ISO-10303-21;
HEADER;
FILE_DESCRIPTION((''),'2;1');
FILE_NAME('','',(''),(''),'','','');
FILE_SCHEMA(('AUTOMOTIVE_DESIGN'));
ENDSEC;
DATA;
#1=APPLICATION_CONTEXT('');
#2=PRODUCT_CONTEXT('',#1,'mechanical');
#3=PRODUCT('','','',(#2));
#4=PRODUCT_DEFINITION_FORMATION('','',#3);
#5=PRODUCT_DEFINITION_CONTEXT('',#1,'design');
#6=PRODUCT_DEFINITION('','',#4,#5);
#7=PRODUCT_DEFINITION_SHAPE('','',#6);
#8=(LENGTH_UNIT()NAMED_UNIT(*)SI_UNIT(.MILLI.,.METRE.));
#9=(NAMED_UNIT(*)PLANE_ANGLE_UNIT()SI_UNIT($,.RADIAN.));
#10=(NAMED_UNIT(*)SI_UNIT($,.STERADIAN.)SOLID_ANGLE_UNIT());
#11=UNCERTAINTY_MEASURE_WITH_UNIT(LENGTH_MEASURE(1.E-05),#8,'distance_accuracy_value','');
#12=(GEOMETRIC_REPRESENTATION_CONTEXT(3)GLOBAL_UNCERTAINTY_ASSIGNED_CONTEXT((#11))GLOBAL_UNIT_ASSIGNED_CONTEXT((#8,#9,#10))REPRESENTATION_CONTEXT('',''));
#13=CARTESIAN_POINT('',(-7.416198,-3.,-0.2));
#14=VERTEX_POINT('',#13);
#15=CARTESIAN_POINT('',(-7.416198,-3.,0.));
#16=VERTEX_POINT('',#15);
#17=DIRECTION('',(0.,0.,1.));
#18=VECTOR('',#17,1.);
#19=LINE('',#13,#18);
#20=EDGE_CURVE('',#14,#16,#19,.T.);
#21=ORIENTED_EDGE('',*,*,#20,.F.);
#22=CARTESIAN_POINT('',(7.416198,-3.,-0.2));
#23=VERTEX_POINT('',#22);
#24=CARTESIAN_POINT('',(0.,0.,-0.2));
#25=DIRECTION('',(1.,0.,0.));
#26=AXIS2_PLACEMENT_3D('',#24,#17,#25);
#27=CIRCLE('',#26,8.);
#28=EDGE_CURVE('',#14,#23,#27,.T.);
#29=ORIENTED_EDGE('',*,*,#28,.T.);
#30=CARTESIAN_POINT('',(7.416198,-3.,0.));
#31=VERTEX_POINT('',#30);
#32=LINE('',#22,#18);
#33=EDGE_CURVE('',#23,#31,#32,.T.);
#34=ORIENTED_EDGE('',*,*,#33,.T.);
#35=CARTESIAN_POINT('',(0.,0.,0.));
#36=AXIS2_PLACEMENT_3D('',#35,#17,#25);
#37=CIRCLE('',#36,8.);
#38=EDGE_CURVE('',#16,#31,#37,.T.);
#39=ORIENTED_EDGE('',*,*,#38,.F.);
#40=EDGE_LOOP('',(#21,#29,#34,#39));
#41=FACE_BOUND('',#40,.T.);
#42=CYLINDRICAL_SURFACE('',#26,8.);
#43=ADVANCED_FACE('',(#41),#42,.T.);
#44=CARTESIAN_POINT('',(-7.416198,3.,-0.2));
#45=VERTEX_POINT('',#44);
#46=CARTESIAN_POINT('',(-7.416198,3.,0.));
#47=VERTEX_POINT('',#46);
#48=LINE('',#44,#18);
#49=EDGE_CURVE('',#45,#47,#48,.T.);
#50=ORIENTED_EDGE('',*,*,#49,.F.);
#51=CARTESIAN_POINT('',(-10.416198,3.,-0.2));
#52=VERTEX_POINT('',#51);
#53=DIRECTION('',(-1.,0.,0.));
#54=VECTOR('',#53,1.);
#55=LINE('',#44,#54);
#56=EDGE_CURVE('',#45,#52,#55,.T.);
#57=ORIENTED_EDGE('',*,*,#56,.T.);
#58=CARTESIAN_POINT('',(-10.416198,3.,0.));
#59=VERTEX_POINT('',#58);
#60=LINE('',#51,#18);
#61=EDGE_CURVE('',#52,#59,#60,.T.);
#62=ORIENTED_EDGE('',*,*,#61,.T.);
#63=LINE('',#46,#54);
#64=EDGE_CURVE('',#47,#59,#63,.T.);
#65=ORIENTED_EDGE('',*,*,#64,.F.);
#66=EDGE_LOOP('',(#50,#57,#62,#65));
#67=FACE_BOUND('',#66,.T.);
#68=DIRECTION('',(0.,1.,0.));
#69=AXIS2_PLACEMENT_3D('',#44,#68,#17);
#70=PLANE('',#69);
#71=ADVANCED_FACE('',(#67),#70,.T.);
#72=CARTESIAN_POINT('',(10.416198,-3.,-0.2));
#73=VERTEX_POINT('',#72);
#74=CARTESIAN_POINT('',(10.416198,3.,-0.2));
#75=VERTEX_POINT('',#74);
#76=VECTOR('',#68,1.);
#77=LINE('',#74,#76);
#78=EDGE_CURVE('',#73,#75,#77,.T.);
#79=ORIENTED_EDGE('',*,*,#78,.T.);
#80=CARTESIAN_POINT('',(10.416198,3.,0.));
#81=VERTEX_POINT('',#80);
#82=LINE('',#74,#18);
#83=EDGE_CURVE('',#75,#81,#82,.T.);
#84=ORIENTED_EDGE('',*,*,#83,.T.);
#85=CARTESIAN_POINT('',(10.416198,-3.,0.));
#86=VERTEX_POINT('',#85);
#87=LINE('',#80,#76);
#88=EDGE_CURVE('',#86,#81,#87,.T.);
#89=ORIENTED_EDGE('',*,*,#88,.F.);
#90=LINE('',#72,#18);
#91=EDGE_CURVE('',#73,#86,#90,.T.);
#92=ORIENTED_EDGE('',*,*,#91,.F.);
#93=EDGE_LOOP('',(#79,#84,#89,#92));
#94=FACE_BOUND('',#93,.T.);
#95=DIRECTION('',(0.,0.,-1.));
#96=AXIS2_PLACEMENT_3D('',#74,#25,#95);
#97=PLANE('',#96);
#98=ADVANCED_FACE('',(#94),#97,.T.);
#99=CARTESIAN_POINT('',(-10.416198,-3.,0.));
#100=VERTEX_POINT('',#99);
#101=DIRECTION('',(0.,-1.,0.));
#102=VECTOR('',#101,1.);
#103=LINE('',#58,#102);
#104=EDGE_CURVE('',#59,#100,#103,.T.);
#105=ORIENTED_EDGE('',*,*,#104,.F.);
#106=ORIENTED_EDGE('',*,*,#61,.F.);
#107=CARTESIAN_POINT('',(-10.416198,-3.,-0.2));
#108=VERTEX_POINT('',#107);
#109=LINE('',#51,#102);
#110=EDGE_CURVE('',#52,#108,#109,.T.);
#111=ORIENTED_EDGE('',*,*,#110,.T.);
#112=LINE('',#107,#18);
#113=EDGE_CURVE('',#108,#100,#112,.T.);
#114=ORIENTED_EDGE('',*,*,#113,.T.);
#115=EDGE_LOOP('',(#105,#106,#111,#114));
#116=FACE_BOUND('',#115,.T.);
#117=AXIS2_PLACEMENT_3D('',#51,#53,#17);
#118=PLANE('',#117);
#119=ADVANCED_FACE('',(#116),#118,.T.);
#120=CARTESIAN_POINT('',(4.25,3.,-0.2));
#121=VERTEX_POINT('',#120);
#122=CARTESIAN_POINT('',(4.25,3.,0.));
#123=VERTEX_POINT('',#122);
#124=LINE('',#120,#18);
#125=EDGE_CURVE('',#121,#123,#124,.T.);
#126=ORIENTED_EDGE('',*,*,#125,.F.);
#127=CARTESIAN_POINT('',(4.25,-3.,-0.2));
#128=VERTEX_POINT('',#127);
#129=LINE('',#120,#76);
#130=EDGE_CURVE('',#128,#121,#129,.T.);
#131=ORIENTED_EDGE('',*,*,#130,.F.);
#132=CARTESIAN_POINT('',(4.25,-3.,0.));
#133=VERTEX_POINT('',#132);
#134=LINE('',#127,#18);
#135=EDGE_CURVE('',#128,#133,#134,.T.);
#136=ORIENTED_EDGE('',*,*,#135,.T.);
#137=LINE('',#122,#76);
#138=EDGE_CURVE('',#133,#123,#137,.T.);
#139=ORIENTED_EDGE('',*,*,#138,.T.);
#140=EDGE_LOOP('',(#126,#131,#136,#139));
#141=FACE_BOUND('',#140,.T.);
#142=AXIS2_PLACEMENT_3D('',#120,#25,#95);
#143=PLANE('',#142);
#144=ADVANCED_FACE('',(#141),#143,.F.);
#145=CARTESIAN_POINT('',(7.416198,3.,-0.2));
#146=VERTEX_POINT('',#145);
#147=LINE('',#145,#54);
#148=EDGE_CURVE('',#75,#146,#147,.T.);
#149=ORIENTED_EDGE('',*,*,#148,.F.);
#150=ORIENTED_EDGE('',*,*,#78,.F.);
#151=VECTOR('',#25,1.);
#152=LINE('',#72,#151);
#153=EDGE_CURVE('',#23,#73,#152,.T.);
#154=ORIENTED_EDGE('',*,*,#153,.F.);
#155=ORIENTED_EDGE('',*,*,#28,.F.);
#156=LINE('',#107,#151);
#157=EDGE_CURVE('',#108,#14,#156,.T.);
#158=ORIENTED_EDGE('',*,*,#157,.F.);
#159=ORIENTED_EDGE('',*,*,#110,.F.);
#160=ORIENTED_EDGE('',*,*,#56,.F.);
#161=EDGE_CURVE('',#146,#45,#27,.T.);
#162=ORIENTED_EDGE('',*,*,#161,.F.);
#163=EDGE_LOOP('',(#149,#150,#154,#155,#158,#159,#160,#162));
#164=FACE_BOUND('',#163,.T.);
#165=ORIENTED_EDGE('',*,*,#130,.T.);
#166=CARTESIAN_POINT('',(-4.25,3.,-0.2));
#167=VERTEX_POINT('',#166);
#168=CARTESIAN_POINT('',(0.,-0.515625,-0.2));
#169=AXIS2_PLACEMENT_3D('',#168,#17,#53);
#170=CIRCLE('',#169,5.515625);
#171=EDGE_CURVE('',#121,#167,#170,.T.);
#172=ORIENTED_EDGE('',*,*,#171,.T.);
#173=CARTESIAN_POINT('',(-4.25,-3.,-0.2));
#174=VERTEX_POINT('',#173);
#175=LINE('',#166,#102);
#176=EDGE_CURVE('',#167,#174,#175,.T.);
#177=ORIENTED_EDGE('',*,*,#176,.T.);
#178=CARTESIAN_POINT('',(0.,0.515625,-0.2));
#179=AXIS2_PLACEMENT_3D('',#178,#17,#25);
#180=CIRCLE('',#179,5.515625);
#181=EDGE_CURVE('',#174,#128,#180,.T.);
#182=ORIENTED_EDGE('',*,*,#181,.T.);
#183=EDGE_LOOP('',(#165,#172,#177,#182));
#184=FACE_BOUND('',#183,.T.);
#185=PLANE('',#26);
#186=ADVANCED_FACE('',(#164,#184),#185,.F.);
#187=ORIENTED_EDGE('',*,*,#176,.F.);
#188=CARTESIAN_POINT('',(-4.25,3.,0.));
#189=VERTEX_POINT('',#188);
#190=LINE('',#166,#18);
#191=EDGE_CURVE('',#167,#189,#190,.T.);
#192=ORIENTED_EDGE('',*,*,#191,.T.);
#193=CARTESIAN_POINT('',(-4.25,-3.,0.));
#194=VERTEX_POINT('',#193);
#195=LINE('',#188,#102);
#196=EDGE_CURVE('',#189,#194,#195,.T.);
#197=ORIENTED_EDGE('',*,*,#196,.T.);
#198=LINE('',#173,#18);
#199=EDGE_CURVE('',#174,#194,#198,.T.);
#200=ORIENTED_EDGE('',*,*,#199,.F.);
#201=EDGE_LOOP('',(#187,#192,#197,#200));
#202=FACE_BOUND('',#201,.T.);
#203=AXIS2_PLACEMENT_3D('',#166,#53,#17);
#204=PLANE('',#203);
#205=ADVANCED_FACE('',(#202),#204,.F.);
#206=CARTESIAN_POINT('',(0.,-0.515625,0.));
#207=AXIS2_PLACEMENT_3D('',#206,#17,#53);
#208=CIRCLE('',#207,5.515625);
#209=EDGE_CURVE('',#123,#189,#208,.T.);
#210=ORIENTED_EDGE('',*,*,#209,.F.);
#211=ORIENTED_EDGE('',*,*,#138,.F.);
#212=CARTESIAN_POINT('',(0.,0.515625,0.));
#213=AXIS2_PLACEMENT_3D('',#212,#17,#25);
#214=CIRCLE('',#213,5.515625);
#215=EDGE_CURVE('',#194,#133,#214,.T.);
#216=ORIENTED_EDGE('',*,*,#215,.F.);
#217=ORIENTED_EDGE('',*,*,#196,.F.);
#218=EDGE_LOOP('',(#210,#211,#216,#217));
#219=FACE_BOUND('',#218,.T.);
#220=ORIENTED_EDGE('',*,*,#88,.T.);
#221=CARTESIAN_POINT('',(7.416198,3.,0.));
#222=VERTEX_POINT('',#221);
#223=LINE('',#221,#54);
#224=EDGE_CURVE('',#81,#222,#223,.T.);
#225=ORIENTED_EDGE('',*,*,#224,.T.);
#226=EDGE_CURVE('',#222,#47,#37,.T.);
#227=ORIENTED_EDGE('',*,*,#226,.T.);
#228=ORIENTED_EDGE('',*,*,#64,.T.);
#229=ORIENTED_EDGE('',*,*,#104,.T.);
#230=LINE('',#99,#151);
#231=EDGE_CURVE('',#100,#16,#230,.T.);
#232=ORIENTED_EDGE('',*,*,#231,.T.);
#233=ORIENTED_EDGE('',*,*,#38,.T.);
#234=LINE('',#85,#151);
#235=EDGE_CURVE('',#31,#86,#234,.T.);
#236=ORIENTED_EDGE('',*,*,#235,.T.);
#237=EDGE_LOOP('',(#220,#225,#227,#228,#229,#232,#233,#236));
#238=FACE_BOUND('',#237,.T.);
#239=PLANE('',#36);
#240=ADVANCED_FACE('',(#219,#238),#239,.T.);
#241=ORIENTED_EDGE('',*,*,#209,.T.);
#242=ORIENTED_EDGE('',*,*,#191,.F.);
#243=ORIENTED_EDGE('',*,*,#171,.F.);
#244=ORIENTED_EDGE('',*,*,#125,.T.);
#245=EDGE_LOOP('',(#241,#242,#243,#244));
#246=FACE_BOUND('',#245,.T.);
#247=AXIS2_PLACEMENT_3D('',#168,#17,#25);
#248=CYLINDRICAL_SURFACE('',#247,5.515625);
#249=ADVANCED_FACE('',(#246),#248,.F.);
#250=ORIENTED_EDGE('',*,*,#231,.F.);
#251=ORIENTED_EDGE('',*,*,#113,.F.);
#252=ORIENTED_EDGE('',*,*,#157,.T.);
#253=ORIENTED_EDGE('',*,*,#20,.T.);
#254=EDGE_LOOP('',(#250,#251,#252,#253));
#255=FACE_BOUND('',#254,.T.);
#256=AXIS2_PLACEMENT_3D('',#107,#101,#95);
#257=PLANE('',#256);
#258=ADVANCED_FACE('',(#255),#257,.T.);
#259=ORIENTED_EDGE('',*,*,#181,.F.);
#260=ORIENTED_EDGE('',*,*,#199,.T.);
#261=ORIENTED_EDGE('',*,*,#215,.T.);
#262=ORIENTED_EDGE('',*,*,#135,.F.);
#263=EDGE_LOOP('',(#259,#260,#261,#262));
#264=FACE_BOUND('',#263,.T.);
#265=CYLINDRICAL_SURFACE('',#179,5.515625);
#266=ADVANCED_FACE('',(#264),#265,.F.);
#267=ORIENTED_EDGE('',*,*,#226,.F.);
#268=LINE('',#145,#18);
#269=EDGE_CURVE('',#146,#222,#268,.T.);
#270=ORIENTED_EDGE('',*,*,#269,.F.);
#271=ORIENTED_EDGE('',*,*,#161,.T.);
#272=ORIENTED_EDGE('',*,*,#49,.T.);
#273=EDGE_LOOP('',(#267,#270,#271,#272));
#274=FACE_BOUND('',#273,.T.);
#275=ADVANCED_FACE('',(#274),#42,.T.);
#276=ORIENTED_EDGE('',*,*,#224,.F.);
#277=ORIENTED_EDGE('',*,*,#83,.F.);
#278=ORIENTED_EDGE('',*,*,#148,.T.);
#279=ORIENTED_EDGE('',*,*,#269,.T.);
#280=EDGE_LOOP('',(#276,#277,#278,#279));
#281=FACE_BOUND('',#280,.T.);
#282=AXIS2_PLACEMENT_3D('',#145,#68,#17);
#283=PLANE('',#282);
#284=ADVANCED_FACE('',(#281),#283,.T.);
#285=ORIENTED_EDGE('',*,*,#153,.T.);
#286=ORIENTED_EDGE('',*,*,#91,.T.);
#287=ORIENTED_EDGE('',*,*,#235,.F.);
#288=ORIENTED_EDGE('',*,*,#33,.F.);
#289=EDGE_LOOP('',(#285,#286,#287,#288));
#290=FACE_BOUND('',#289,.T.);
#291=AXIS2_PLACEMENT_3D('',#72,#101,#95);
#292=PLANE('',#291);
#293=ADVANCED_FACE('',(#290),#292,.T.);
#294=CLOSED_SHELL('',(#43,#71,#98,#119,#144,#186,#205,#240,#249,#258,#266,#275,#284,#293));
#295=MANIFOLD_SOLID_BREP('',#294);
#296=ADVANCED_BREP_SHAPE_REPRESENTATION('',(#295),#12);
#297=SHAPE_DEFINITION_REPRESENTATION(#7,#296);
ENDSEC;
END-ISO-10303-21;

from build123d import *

# Parameters (mm, degrees)
BASE_FLANGE1_DEPTH = 0.2


# Sheet-metal steps are written as plain solids
with BuildPart() as part:
    # Sketch1 → Base-Flange1 (new body)
    with BuildSketch(Plane.XY):
        with BuildLine():
            Line((7.416198487, 3), (10.416198487, 3))
            Line((10.416198487, 3), (10.416198487, -3))
            Line((10.416198487, -3), (7.416198487, -3))
            ThreePointArc((7.416198487, -3), (0, -8), (-7.416198487, -3))
            Line((-7.416198487, -3), (-10.416198487, -3))
            Line((-10.416198487, -3), (-10.416198487, 3))
            Line((-10.416198487, 3), (-7.416198487, 3))
            ThreePointArc((-7.416198487, 3), (0, 8), (7.416198487, 3))
        make_face()
        with BuildLine():
            Line((-4.25, 3), (-4.25, -3))
            ThreePointArc((-4.25, -3), (0, -5), (4.25, -3))
            Line((4.25, -3), (4.25, 3))
            ThreePointArc((4.25, 3), (0, 5), (-4.25, 3))
        make_face(mode=Mode.SUBTRACT)
    extrude(amount=-BASE_FLANGE1_DEPTH)


solid = part.part
